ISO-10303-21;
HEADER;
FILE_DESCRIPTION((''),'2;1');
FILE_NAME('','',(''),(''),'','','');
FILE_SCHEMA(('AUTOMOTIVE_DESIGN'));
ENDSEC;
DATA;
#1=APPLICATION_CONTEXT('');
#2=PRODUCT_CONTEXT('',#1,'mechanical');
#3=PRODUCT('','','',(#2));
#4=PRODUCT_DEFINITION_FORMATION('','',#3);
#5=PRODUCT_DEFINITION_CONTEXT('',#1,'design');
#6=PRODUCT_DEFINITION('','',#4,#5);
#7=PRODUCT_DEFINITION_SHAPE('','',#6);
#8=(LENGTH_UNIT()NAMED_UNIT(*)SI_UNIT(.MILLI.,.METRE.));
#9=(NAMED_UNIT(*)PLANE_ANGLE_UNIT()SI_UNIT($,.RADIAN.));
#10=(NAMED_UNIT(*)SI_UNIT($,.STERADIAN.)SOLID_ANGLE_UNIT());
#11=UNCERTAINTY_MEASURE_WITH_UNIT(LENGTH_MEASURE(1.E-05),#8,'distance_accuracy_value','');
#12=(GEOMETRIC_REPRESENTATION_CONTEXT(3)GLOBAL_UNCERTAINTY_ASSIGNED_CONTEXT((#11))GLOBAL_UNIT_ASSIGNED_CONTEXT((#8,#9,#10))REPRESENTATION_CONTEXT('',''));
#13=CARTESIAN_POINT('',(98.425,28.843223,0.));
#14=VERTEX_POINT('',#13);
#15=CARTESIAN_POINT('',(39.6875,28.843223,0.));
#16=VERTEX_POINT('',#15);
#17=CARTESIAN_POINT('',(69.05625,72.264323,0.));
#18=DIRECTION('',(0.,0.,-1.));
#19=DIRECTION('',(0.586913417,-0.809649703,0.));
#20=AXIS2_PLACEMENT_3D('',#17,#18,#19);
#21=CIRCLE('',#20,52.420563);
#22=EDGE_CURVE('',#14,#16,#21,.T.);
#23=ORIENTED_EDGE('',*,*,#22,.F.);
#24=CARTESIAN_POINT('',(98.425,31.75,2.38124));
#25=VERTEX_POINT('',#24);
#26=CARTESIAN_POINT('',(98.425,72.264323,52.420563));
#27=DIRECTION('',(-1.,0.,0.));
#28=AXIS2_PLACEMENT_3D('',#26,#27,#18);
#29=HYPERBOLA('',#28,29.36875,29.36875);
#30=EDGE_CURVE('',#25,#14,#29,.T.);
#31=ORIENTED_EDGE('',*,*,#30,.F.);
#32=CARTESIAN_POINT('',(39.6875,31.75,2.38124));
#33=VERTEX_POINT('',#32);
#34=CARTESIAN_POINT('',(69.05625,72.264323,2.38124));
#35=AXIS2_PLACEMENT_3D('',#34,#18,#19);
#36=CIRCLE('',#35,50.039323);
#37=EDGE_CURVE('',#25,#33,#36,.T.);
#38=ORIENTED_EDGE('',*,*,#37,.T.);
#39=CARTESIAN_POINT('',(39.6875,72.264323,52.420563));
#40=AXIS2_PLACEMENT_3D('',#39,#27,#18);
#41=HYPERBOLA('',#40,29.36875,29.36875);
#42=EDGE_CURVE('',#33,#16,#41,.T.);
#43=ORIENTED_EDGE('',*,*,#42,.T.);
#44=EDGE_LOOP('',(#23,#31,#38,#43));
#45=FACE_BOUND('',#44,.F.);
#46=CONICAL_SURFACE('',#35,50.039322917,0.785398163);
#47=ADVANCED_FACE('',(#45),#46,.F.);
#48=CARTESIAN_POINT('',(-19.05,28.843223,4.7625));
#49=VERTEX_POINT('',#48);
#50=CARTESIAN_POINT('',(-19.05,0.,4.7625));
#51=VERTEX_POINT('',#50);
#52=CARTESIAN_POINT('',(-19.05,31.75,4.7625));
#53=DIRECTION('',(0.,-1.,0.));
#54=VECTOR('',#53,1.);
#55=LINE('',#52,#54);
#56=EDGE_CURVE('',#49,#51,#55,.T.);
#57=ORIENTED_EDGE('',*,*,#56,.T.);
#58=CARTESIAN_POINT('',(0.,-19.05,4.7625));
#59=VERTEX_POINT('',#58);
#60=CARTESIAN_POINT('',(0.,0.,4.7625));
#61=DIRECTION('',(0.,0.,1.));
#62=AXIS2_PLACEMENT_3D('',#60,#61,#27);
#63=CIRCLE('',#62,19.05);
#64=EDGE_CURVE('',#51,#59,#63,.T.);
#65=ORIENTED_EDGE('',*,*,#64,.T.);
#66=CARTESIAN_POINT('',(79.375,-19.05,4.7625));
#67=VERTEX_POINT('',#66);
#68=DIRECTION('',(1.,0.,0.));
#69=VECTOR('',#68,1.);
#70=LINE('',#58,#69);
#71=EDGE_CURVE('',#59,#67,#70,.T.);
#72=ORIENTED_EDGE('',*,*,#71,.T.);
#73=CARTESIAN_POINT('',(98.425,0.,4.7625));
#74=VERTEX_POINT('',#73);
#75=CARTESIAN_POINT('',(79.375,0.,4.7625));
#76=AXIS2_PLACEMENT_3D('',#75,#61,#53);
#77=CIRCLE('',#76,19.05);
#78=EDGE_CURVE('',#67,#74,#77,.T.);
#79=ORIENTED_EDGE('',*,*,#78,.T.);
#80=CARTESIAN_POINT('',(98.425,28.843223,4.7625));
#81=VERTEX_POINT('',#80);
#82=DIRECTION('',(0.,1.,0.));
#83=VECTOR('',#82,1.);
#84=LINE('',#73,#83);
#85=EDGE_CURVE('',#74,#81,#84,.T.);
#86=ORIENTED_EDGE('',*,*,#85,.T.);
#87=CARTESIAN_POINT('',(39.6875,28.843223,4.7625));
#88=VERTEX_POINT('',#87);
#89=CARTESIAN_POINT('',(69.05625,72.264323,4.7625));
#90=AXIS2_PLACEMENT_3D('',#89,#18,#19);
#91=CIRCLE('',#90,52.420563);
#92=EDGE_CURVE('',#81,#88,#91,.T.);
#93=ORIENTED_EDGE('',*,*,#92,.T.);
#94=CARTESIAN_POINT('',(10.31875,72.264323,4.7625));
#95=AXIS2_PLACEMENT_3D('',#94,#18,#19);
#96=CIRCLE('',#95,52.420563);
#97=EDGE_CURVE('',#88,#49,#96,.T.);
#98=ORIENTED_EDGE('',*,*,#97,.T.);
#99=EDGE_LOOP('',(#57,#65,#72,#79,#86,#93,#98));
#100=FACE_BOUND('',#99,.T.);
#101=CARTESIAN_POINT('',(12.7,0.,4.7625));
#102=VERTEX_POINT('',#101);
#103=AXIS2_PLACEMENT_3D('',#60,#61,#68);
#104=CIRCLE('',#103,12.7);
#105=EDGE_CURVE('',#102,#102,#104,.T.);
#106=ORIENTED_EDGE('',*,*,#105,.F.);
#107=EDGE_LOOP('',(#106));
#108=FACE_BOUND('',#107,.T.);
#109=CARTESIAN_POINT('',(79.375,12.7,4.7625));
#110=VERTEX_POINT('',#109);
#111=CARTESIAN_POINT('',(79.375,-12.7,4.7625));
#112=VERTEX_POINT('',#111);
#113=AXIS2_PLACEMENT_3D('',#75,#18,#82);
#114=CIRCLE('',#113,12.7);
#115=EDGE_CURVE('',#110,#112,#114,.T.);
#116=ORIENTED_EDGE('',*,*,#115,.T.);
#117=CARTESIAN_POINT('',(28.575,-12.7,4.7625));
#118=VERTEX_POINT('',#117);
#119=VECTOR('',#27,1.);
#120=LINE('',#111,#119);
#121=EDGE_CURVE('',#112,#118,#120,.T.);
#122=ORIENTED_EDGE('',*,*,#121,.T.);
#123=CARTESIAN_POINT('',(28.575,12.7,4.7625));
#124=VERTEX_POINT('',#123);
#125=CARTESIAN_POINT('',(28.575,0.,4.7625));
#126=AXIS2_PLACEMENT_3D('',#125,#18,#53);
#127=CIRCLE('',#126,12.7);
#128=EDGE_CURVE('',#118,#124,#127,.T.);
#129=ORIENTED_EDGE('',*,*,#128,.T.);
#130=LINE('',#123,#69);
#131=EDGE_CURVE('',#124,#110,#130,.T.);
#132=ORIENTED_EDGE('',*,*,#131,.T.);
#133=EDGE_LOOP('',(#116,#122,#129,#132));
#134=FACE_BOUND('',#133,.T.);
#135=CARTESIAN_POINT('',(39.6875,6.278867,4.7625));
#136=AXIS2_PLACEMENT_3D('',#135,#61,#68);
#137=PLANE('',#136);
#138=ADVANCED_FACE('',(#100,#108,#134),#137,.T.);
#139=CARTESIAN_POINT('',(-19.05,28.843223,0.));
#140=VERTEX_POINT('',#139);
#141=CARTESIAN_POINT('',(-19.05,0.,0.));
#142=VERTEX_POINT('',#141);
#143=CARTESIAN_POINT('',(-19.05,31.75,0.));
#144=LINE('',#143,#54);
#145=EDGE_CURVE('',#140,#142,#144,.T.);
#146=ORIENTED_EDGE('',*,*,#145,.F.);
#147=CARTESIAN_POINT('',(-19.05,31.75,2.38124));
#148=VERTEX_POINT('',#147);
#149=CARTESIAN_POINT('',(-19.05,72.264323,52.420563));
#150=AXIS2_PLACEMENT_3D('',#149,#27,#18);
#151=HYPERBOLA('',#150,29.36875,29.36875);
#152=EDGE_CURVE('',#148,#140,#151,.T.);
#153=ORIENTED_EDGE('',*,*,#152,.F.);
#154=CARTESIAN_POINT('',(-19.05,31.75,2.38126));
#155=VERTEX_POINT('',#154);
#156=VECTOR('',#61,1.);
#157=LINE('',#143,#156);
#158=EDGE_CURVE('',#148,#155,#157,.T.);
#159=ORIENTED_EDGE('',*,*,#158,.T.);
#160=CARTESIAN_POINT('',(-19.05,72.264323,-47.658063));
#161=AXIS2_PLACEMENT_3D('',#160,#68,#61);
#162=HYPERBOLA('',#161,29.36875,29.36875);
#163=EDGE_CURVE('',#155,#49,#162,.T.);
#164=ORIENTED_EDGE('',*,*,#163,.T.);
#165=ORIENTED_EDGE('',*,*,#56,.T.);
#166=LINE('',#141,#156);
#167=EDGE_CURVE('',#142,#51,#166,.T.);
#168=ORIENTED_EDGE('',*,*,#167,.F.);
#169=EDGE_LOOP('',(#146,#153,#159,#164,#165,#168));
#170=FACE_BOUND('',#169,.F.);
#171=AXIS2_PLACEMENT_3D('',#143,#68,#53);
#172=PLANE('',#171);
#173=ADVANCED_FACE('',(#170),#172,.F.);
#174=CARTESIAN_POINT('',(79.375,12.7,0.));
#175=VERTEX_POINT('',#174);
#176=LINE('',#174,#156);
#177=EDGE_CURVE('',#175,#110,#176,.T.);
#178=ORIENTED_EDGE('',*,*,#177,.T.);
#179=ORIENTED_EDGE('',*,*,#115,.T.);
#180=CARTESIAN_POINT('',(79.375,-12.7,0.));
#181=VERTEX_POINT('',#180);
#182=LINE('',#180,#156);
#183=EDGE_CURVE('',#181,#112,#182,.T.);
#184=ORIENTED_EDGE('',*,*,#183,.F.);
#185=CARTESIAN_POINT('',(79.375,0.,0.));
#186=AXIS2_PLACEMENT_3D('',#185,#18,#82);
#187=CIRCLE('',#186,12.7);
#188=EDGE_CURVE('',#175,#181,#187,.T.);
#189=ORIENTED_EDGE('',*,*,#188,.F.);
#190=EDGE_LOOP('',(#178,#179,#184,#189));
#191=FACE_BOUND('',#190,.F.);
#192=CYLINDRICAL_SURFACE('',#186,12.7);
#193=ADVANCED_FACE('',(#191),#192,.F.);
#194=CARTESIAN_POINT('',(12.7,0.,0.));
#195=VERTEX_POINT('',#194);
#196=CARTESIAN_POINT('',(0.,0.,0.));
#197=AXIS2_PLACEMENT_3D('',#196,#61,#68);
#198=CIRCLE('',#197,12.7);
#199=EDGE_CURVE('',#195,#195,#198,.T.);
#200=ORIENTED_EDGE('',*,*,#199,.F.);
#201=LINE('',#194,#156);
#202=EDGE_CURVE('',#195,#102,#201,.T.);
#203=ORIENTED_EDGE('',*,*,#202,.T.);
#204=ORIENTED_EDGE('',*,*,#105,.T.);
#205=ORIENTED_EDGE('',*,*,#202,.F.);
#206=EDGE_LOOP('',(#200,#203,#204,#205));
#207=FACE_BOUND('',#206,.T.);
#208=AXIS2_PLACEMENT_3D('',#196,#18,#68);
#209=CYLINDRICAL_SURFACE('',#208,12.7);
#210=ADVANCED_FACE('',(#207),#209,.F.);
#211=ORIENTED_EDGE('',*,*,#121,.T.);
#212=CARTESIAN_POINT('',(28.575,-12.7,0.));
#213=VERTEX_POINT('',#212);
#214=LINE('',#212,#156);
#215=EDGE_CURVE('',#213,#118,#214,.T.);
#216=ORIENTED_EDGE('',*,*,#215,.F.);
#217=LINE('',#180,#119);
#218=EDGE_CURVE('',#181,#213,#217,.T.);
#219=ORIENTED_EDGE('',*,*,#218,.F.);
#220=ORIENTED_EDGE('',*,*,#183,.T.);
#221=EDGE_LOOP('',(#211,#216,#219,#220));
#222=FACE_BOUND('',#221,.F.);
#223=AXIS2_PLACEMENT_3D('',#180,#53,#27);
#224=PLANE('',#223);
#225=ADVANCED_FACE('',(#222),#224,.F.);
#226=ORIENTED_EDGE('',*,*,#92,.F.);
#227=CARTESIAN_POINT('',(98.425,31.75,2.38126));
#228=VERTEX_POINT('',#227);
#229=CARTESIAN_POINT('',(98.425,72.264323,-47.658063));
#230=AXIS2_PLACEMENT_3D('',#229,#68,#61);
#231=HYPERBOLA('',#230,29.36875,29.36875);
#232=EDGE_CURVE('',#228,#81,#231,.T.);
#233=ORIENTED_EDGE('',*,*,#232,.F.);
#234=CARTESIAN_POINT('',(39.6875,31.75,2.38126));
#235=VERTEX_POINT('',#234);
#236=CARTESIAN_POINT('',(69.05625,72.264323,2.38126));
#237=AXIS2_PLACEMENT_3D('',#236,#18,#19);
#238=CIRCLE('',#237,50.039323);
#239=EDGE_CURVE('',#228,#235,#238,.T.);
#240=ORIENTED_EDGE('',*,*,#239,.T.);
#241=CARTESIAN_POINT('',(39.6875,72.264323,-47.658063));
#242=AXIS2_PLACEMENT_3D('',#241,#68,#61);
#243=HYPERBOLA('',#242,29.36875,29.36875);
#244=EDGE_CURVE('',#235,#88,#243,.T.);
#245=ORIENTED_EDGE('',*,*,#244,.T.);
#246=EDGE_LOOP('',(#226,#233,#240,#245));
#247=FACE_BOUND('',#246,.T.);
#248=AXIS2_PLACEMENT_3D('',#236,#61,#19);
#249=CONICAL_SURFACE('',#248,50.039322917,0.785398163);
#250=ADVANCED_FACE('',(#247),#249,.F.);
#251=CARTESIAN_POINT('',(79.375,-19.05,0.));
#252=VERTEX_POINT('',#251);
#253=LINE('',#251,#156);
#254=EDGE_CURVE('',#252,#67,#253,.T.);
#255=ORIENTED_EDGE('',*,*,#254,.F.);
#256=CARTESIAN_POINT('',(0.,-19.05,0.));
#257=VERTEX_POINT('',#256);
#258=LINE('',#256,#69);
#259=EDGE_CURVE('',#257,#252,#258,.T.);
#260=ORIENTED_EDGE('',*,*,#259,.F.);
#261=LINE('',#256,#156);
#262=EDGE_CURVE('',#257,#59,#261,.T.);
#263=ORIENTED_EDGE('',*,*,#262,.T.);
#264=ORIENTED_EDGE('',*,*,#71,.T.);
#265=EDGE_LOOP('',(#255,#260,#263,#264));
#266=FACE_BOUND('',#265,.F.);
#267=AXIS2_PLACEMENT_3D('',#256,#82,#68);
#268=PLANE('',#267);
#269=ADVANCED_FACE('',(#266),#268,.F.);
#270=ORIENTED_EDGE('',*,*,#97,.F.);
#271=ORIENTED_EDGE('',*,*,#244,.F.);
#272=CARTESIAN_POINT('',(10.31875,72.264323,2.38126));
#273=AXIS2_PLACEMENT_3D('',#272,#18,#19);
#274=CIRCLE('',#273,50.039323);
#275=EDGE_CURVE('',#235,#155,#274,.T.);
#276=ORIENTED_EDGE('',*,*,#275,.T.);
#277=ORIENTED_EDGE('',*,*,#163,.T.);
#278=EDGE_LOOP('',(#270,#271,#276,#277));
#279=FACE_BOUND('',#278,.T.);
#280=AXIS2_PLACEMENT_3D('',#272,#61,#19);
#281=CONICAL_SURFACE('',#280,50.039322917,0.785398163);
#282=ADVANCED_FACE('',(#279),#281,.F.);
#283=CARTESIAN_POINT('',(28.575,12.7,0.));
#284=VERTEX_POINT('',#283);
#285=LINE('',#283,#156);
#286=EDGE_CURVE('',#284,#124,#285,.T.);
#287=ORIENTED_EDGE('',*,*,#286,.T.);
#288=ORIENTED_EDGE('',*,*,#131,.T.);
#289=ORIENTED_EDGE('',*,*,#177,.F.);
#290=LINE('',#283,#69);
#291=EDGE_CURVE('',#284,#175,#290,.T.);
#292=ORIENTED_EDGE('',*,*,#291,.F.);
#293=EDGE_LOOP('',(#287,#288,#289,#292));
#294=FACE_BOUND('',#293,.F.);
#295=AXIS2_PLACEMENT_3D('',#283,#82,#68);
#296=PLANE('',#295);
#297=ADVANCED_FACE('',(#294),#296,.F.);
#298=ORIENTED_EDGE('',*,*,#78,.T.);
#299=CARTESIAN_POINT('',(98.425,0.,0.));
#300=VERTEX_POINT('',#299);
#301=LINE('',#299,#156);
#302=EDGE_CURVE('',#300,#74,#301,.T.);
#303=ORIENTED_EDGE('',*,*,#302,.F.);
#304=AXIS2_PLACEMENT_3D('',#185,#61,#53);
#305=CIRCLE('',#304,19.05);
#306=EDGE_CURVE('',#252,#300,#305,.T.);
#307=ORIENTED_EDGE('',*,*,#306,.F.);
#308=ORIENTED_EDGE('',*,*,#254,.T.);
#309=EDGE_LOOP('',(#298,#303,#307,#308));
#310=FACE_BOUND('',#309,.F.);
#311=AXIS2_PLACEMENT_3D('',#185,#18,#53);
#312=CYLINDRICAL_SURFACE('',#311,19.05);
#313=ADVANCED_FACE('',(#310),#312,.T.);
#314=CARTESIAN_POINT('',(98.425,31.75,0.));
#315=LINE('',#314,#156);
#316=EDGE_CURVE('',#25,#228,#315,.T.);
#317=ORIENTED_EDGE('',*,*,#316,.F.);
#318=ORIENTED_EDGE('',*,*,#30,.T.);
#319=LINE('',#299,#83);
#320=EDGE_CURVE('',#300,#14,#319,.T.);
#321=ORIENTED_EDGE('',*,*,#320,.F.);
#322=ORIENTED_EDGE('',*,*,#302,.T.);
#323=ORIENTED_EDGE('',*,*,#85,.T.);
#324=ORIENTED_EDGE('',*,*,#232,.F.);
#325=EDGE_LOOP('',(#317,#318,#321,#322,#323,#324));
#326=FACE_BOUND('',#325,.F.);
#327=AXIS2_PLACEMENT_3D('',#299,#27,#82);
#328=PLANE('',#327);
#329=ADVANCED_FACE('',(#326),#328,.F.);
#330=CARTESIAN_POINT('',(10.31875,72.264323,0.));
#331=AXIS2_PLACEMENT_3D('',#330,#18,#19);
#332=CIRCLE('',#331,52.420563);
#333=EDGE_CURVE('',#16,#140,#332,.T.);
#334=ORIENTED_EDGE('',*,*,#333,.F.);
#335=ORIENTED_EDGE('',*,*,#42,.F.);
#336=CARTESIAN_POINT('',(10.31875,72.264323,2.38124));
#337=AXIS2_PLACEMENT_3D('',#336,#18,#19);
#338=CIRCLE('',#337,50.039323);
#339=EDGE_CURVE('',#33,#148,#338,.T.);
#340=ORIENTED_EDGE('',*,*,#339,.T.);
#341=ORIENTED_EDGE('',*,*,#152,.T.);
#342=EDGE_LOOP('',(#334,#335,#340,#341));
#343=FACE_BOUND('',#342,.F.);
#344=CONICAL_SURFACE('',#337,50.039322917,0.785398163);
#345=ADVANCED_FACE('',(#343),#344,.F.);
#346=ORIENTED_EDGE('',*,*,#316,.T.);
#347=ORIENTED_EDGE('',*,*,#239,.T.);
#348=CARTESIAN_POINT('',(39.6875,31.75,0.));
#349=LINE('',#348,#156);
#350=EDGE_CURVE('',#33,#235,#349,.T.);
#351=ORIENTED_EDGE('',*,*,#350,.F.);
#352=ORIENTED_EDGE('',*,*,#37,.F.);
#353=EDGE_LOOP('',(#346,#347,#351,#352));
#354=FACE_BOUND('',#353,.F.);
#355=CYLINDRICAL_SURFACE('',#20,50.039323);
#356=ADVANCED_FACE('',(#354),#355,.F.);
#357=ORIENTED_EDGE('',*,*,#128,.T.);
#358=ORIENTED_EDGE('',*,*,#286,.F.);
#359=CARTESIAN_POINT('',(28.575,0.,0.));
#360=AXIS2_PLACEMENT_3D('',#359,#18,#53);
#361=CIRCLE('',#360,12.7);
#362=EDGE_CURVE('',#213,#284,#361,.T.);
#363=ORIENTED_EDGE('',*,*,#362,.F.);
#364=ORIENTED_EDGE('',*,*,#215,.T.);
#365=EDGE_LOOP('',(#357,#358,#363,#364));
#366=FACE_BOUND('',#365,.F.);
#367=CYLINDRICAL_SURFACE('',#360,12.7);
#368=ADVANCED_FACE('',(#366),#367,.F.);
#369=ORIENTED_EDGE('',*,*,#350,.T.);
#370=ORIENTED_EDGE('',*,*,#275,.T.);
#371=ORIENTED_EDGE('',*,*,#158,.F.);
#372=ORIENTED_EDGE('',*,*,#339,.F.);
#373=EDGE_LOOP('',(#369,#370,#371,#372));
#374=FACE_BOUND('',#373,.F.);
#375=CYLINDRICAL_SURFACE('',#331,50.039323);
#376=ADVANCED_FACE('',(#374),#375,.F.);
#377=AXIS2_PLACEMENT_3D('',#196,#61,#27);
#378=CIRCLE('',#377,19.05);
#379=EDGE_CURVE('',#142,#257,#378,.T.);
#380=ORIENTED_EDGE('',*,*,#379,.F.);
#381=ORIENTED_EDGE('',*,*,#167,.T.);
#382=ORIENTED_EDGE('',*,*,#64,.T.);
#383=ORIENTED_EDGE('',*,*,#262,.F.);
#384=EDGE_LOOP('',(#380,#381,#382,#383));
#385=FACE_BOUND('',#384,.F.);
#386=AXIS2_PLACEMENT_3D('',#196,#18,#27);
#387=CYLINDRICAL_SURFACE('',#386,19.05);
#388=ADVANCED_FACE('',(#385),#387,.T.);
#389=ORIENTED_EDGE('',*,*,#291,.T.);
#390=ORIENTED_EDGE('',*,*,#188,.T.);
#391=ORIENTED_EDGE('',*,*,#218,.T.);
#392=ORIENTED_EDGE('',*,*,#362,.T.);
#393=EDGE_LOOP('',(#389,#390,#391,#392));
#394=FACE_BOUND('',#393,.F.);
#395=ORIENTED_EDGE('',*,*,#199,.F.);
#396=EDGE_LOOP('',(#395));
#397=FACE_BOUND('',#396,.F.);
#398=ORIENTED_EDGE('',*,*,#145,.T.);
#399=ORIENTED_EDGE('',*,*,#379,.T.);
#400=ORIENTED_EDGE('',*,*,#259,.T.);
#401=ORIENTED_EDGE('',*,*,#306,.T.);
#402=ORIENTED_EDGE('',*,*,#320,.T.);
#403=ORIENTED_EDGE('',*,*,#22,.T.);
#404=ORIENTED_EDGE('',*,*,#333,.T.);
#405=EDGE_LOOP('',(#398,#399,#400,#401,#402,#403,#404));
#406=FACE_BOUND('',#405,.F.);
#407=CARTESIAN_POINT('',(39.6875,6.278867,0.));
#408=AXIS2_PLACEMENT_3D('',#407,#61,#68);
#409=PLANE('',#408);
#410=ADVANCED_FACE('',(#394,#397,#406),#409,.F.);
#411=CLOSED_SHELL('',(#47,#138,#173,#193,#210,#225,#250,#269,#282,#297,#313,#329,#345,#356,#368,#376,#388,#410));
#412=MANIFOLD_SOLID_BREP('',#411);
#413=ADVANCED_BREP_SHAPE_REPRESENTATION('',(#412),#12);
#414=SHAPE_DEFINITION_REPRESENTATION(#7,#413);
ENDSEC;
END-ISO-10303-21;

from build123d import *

# Parameters (mm, degrees)
F0_R     = 12.7
F1_DEPTH = 4.7625
F2_SIZE  = 2.38124


# Not quite as in the source:
# - a fillet or chamfer is up to 0.001 mm smaller than in the source, because OpenCascade refuses the exact size


with BuildPart() as f1:
    # F0 (on Top) → F1 (new body)
    with BuildSketch(Plane.XY):
        with BuildLine():
            Line((-19.05, 31.75), (-19.05, 0))
            ThreePointArc((-19.05, 0), (-13.4703841816, -13.4703841816), (0, -19.05))
            Line((0, -19.05), (79.375, -19.05))
            ThreePointArc((79.375, -19.05), (92.8453841816, -13.4703841816), (98.425, 0))
            Line((98.425, 0), (98.425, 31.75))
            ThreePointArc((98.425, 31.75), (69.05625, 22.225), (39.6875, 31.75))
            ThreePointArc((39.6875, 31.75), (10.31875, 22.225), (-19.05, 31.75))
        make_face()
        Circle(F0_R, mode=Mode.SUBTRACT)
        with BuildLine():
            Line((79.375, -12.7), (28.575, -12.7))
            ThreePointArc((28.575, -12.7), (15.875, 0), (28.575, 12.7))
            Line((28.575, 12.7), (79.375, 12.7))
            ThreePointArc((79.375, 12.7), (92.075, 0), (79.375, -12.7))
        make_face(mode=Mode.SUBTRACT)
    extrude(amount=F1_DEPTH)

    # F2 (size 2.38125 in the source; OpenCascade refuses exactly that, so slightly less here)
    f2_edges = [f1.edges().sort_by_distance(p)[0] for p in [
        (10.31875, 22.225, 4.7625),
        (69.05625, 22.225, 4.7625),
        (69.05625, 22.225, 0),
        (10.31875, 22.225, 0),
    ]]
    chamfer(f2_edges, length=F2_SIZE)


solid = f1.part
